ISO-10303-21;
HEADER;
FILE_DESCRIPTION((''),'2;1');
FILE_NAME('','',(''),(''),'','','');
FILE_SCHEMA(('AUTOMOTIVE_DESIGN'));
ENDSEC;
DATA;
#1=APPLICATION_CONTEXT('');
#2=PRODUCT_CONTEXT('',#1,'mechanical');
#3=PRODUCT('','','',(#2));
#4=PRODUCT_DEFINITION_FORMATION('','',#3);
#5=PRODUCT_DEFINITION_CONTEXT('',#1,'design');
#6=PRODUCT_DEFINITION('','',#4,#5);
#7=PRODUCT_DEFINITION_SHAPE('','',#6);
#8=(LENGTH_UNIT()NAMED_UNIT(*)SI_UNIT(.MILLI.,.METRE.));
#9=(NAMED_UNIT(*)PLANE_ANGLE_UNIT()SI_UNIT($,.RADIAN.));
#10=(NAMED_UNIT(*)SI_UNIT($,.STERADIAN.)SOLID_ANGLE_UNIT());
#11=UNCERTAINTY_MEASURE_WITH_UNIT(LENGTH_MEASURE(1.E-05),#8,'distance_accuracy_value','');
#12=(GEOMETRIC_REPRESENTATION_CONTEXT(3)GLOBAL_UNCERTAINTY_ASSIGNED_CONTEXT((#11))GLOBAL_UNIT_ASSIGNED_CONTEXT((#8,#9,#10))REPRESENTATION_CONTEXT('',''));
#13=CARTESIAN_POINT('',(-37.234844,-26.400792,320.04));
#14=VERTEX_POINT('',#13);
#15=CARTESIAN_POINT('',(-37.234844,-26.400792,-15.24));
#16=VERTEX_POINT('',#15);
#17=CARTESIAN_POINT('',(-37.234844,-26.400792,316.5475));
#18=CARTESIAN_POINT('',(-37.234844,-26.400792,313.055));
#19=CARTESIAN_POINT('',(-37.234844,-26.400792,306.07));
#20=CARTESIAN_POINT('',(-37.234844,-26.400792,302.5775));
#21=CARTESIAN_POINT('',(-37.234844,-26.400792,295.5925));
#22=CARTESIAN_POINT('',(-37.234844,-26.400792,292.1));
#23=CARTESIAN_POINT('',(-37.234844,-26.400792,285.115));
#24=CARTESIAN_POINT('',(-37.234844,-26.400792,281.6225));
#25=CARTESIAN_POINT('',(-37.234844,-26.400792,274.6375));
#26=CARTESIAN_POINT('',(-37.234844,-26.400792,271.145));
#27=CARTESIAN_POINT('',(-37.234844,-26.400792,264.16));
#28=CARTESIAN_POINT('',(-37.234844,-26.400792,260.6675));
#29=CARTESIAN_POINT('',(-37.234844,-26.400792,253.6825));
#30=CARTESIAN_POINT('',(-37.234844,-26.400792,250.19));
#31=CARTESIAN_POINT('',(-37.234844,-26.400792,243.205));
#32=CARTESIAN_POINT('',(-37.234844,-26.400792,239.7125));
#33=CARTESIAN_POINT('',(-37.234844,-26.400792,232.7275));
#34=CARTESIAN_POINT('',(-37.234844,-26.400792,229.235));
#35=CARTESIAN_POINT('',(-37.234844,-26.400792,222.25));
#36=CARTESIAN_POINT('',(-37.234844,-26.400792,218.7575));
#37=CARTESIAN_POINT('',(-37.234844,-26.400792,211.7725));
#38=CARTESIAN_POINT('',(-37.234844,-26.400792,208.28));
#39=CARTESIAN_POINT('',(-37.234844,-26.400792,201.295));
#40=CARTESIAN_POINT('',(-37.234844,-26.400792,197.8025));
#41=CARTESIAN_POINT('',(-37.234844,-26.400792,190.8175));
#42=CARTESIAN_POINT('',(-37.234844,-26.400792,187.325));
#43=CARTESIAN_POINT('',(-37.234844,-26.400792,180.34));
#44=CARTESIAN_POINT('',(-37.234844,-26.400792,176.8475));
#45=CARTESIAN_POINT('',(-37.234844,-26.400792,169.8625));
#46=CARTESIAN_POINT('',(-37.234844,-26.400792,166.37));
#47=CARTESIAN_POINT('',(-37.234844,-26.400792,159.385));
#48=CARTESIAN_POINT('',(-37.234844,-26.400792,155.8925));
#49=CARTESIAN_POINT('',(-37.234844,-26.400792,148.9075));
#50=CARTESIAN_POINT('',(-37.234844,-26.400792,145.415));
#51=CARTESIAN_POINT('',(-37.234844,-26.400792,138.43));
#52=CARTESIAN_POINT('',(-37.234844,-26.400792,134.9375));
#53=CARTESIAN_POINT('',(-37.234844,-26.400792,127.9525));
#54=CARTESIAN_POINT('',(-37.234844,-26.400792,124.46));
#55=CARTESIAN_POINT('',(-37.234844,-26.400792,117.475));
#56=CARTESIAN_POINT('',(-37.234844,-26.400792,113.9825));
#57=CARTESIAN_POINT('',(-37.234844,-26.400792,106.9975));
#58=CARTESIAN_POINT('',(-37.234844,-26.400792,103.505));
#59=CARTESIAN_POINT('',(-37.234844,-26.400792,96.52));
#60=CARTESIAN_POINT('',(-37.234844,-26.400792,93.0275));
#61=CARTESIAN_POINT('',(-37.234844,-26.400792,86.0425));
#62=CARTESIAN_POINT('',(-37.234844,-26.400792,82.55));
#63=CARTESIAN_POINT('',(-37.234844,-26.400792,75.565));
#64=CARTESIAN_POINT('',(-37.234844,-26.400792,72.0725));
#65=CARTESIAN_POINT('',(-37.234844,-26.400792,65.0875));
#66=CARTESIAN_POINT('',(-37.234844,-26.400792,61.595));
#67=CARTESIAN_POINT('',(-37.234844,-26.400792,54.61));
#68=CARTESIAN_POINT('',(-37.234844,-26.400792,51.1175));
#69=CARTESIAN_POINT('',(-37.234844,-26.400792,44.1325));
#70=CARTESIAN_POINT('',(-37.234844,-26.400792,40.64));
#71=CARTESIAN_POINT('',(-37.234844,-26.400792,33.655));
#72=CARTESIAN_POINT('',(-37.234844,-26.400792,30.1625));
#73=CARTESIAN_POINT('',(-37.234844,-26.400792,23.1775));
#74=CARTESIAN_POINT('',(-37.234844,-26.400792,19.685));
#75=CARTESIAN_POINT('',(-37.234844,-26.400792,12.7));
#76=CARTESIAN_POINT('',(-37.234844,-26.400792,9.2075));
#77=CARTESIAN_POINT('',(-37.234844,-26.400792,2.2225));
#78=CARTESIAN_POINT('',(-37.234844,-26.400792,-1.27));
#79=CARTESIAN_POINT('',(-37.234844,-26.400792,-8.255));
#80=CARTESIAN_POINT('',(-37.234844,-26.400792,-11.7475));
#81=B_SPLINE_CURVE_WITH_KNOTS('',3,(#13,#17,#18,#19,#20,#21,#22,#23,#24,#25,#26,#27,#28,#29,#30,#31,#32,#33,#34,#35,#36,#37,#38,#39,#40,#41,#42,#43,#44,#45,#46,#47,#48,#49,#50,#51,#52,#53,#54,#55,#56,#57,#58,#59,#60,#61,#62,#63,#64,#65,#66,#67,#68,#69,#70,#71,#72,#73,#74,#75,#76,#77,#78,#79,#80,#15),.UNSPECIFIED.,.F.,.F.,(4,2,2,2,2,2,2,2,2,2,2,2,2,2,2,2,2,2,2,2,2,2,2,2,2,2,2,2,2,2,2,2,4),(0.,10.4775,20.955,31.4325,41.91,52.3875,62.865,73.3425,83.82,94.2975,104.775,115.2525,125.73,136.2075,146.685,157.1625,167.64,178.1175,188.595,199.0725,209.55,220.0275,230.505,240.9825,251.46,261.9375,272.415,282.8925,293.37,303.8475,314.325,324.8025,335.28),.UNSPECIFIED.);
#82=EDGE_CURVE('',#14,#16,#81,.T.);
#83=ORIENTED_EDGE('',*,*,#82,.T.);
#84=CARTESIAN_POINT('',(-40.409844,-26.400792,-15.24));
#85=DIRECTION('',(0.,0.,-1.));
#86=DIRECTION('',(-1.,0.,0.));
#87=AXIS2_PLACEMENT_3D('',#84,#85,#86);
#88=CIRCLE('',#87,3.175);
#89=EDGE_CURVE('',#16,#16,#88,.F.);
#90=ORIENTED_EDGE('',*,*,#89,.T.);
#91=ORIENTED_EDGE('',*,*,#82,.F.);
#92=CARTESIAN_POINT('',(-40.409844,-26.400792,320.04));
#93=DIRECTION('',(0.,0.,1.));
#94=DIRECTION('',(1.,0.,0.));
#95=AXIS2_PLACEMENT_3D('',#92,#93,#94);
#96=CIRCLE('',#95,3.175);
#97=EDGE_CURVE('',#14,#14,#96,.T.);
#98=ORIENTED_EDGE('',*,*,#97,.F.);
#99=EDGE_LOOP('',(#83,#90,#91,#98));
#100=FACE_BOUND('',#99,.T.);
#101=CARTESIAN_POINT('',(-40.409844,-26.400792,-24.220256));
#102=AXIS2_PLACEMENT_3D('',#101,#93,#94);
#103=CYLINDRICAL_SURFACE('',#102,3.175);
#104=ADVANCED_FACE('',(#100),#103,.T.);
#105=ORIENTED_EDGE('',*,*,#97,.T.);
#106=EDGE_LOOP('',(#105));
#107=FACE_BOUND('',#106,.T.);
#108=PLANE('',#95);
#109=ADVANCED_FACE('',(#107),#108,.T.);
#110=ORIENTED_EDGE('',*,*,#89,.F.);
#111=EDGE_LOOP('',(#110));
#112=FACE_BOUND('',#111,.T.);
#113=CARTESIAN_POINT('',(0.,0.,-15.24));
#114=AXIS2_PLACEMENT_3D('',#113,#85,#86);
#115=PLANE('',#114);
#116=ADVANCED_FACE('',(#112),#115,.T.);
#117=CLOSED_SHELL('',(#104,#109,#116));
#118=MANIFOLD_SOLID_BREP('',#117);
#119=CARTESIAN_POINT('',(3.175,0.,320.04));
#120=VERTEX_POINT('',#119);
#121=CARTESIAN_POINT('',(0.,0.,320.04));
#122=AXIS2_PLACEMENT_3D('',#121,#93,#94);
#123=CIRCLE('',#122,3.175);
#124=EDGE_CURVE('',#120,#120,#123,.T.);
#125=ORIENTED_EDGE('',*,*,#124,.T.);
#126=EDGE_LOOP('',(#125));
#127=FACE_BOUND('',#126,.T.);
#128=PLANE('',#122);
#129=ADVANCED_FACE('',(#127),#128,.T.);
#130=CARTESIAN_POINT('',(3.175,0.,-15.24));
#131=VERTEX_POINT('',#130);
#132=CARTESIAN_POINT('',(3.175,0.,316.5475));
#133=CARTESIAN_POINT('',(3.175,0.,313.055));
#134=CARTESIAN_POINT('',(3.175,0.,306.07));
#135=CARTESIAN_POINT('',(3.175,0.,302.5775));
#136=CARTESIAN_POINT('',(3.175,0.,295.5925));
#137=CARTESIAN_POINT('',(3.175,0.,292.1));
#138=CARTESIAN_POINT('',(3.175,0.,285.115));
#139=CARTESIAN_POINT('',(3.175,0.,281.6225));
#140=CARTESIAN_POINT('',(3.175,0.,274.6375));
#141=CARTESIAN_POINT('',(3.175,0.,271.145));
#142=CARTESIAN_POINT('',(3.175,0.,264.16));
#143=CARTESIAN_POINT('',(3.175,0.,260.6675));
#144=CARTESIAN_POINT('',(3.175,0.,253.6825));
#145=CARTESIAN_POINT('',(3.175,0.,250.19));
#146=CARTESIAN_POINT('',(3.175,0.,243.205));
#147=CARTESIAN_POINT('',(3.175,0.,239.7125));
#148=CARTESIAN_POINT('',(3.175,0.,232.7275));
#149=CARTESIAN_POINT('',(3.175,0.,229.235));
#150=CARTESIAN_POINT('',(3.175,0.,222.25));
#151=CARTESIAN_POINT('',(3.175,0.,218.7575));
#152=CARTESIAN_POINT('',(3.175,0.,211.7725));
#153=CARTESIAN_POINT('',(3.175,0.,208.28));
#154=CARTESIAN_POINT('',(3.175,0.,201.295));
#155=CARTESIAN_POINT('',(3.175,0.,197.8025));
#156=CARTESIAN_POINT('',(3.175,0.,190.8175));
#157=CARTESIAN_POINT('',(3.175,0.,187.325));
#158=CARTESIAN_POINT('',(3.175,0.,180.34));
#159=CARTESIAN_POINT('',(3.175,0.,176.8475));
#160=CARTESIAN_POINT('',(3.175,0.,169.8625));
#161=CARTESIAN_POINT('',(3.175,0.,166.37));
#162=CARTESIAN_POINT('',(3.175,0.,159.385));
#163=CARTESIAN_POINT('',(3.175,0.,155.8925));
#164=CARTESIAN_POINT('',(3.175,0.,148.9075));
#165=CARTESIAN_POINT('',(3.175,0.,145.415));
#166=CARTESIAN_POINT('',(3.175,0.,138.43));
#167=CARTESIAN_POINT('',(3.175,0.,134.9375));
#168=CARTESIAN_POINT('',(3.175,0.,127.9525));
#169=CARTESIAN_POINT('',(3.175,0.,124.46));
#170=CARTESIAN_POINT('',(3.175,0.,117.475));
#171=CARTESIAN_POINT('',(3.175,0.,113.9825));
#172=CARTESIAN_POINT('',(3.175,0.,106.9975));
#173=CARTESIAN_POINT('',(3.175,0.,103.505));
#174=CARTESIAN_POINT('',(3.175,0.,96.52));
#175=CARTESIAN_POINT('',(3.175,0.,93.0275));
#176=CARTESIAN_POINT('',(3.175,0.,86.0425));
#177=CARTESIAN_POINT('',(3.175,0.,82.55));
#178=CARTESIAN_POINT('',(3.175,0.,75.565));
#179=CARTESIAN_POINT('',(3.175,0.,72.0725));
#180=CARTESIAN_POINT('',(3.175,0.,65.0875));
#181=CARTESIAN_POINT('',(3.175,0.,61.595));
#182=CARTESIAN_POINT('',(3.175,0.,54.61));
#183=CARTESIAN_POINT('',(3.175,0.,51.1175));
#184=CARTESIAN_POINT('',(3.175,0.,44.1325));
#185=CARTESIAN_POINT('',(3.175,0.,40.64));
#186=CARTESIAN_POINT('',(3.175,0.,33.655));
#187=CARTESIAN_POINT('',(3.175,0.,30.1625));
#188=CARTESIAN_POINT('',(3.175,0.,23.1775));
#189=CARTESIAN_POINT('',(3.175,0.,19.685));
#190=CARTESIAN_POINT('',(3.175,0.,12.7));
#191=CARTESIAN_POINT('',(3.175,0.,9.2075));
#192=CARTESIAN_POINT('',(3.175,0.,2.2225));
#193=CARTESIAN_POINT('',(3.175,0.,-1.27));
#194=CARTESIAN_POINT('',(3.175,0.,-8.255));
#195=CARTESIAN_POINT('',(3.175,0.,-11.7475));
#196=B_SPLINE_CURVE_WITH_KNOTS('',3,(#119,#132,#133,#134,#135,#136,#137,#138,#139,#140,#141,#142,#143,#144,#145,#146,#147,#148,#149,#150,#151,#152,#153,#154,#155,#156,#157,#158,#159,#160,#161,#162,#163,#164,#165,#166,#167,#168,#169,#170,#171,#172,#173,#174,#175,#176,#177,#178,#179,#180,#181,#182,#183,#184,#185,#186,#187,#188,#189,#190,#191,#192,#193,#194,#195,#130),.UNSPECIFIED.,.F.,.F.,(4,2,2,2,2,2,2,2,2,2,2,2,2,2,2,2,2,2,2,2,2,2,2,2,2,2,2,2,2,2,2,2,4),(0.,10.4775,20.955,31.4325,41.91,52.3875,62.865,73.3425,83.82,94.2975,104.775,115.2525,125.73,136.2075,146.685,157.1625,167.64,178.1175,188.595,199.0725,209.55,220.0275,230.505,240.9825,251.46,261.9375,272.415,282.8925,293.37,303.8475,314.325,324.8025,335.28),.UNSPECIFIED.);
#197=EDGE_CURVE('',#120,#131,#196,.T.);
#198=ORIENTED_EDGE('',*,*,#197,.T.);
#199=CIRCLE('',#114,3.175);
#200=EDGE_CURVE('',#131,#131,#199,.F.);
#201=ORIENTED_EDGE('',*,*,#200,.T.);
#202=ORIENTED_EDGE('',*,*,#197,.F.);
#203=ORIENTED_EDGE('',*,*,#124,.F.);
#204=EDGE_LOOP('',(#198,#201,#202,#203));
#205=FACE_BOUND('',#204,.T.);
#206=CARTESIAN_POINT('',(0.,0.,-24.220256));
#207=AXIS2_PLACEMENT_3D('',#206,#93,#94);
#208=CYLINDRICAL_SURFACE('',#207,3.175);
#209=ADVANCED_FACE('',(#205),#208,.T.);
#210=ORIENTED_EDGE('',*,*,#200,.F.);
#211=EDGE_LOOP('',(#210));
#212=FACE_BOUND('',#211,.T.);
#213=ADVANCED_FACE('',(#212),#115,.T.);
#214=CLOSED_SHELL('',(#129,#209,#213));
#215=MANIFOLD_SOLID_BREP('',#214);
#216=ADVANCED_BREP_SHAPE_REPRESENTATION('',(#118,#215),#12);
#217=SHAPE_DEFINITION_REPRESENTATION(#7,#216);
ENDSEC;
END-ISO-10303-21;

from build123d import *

# Parameters (mm, degrees)
BOSS_EXTRUDE1_START     = -335.28
BOSS_EXTRUDE1_OUTLINE_R = 3.175
BOSS_EXTRUDE1_DEPTH     = 335.28


# Read off the part's stored shape, not the designer's step: Boss-Extrude1
with BuildPart() as part:
    # Boss-Extrude1 outline → Boss-Extrude1 (new body)
    with BuildSketch(Plane.XY.offset(320.04).offset(BOSS_EXTRUDE1_START)):
        with Locations((-40.409844034, -26.400791933)):
            Circle(BOSS_EXTRUDE1_OUTLINE_R)
        Circle(BOSS_EXTRUDE1_OUTLINE_R)
    extrude(amount=BOSS_EXTRUDE1_DEPTH)


solid = part.part
